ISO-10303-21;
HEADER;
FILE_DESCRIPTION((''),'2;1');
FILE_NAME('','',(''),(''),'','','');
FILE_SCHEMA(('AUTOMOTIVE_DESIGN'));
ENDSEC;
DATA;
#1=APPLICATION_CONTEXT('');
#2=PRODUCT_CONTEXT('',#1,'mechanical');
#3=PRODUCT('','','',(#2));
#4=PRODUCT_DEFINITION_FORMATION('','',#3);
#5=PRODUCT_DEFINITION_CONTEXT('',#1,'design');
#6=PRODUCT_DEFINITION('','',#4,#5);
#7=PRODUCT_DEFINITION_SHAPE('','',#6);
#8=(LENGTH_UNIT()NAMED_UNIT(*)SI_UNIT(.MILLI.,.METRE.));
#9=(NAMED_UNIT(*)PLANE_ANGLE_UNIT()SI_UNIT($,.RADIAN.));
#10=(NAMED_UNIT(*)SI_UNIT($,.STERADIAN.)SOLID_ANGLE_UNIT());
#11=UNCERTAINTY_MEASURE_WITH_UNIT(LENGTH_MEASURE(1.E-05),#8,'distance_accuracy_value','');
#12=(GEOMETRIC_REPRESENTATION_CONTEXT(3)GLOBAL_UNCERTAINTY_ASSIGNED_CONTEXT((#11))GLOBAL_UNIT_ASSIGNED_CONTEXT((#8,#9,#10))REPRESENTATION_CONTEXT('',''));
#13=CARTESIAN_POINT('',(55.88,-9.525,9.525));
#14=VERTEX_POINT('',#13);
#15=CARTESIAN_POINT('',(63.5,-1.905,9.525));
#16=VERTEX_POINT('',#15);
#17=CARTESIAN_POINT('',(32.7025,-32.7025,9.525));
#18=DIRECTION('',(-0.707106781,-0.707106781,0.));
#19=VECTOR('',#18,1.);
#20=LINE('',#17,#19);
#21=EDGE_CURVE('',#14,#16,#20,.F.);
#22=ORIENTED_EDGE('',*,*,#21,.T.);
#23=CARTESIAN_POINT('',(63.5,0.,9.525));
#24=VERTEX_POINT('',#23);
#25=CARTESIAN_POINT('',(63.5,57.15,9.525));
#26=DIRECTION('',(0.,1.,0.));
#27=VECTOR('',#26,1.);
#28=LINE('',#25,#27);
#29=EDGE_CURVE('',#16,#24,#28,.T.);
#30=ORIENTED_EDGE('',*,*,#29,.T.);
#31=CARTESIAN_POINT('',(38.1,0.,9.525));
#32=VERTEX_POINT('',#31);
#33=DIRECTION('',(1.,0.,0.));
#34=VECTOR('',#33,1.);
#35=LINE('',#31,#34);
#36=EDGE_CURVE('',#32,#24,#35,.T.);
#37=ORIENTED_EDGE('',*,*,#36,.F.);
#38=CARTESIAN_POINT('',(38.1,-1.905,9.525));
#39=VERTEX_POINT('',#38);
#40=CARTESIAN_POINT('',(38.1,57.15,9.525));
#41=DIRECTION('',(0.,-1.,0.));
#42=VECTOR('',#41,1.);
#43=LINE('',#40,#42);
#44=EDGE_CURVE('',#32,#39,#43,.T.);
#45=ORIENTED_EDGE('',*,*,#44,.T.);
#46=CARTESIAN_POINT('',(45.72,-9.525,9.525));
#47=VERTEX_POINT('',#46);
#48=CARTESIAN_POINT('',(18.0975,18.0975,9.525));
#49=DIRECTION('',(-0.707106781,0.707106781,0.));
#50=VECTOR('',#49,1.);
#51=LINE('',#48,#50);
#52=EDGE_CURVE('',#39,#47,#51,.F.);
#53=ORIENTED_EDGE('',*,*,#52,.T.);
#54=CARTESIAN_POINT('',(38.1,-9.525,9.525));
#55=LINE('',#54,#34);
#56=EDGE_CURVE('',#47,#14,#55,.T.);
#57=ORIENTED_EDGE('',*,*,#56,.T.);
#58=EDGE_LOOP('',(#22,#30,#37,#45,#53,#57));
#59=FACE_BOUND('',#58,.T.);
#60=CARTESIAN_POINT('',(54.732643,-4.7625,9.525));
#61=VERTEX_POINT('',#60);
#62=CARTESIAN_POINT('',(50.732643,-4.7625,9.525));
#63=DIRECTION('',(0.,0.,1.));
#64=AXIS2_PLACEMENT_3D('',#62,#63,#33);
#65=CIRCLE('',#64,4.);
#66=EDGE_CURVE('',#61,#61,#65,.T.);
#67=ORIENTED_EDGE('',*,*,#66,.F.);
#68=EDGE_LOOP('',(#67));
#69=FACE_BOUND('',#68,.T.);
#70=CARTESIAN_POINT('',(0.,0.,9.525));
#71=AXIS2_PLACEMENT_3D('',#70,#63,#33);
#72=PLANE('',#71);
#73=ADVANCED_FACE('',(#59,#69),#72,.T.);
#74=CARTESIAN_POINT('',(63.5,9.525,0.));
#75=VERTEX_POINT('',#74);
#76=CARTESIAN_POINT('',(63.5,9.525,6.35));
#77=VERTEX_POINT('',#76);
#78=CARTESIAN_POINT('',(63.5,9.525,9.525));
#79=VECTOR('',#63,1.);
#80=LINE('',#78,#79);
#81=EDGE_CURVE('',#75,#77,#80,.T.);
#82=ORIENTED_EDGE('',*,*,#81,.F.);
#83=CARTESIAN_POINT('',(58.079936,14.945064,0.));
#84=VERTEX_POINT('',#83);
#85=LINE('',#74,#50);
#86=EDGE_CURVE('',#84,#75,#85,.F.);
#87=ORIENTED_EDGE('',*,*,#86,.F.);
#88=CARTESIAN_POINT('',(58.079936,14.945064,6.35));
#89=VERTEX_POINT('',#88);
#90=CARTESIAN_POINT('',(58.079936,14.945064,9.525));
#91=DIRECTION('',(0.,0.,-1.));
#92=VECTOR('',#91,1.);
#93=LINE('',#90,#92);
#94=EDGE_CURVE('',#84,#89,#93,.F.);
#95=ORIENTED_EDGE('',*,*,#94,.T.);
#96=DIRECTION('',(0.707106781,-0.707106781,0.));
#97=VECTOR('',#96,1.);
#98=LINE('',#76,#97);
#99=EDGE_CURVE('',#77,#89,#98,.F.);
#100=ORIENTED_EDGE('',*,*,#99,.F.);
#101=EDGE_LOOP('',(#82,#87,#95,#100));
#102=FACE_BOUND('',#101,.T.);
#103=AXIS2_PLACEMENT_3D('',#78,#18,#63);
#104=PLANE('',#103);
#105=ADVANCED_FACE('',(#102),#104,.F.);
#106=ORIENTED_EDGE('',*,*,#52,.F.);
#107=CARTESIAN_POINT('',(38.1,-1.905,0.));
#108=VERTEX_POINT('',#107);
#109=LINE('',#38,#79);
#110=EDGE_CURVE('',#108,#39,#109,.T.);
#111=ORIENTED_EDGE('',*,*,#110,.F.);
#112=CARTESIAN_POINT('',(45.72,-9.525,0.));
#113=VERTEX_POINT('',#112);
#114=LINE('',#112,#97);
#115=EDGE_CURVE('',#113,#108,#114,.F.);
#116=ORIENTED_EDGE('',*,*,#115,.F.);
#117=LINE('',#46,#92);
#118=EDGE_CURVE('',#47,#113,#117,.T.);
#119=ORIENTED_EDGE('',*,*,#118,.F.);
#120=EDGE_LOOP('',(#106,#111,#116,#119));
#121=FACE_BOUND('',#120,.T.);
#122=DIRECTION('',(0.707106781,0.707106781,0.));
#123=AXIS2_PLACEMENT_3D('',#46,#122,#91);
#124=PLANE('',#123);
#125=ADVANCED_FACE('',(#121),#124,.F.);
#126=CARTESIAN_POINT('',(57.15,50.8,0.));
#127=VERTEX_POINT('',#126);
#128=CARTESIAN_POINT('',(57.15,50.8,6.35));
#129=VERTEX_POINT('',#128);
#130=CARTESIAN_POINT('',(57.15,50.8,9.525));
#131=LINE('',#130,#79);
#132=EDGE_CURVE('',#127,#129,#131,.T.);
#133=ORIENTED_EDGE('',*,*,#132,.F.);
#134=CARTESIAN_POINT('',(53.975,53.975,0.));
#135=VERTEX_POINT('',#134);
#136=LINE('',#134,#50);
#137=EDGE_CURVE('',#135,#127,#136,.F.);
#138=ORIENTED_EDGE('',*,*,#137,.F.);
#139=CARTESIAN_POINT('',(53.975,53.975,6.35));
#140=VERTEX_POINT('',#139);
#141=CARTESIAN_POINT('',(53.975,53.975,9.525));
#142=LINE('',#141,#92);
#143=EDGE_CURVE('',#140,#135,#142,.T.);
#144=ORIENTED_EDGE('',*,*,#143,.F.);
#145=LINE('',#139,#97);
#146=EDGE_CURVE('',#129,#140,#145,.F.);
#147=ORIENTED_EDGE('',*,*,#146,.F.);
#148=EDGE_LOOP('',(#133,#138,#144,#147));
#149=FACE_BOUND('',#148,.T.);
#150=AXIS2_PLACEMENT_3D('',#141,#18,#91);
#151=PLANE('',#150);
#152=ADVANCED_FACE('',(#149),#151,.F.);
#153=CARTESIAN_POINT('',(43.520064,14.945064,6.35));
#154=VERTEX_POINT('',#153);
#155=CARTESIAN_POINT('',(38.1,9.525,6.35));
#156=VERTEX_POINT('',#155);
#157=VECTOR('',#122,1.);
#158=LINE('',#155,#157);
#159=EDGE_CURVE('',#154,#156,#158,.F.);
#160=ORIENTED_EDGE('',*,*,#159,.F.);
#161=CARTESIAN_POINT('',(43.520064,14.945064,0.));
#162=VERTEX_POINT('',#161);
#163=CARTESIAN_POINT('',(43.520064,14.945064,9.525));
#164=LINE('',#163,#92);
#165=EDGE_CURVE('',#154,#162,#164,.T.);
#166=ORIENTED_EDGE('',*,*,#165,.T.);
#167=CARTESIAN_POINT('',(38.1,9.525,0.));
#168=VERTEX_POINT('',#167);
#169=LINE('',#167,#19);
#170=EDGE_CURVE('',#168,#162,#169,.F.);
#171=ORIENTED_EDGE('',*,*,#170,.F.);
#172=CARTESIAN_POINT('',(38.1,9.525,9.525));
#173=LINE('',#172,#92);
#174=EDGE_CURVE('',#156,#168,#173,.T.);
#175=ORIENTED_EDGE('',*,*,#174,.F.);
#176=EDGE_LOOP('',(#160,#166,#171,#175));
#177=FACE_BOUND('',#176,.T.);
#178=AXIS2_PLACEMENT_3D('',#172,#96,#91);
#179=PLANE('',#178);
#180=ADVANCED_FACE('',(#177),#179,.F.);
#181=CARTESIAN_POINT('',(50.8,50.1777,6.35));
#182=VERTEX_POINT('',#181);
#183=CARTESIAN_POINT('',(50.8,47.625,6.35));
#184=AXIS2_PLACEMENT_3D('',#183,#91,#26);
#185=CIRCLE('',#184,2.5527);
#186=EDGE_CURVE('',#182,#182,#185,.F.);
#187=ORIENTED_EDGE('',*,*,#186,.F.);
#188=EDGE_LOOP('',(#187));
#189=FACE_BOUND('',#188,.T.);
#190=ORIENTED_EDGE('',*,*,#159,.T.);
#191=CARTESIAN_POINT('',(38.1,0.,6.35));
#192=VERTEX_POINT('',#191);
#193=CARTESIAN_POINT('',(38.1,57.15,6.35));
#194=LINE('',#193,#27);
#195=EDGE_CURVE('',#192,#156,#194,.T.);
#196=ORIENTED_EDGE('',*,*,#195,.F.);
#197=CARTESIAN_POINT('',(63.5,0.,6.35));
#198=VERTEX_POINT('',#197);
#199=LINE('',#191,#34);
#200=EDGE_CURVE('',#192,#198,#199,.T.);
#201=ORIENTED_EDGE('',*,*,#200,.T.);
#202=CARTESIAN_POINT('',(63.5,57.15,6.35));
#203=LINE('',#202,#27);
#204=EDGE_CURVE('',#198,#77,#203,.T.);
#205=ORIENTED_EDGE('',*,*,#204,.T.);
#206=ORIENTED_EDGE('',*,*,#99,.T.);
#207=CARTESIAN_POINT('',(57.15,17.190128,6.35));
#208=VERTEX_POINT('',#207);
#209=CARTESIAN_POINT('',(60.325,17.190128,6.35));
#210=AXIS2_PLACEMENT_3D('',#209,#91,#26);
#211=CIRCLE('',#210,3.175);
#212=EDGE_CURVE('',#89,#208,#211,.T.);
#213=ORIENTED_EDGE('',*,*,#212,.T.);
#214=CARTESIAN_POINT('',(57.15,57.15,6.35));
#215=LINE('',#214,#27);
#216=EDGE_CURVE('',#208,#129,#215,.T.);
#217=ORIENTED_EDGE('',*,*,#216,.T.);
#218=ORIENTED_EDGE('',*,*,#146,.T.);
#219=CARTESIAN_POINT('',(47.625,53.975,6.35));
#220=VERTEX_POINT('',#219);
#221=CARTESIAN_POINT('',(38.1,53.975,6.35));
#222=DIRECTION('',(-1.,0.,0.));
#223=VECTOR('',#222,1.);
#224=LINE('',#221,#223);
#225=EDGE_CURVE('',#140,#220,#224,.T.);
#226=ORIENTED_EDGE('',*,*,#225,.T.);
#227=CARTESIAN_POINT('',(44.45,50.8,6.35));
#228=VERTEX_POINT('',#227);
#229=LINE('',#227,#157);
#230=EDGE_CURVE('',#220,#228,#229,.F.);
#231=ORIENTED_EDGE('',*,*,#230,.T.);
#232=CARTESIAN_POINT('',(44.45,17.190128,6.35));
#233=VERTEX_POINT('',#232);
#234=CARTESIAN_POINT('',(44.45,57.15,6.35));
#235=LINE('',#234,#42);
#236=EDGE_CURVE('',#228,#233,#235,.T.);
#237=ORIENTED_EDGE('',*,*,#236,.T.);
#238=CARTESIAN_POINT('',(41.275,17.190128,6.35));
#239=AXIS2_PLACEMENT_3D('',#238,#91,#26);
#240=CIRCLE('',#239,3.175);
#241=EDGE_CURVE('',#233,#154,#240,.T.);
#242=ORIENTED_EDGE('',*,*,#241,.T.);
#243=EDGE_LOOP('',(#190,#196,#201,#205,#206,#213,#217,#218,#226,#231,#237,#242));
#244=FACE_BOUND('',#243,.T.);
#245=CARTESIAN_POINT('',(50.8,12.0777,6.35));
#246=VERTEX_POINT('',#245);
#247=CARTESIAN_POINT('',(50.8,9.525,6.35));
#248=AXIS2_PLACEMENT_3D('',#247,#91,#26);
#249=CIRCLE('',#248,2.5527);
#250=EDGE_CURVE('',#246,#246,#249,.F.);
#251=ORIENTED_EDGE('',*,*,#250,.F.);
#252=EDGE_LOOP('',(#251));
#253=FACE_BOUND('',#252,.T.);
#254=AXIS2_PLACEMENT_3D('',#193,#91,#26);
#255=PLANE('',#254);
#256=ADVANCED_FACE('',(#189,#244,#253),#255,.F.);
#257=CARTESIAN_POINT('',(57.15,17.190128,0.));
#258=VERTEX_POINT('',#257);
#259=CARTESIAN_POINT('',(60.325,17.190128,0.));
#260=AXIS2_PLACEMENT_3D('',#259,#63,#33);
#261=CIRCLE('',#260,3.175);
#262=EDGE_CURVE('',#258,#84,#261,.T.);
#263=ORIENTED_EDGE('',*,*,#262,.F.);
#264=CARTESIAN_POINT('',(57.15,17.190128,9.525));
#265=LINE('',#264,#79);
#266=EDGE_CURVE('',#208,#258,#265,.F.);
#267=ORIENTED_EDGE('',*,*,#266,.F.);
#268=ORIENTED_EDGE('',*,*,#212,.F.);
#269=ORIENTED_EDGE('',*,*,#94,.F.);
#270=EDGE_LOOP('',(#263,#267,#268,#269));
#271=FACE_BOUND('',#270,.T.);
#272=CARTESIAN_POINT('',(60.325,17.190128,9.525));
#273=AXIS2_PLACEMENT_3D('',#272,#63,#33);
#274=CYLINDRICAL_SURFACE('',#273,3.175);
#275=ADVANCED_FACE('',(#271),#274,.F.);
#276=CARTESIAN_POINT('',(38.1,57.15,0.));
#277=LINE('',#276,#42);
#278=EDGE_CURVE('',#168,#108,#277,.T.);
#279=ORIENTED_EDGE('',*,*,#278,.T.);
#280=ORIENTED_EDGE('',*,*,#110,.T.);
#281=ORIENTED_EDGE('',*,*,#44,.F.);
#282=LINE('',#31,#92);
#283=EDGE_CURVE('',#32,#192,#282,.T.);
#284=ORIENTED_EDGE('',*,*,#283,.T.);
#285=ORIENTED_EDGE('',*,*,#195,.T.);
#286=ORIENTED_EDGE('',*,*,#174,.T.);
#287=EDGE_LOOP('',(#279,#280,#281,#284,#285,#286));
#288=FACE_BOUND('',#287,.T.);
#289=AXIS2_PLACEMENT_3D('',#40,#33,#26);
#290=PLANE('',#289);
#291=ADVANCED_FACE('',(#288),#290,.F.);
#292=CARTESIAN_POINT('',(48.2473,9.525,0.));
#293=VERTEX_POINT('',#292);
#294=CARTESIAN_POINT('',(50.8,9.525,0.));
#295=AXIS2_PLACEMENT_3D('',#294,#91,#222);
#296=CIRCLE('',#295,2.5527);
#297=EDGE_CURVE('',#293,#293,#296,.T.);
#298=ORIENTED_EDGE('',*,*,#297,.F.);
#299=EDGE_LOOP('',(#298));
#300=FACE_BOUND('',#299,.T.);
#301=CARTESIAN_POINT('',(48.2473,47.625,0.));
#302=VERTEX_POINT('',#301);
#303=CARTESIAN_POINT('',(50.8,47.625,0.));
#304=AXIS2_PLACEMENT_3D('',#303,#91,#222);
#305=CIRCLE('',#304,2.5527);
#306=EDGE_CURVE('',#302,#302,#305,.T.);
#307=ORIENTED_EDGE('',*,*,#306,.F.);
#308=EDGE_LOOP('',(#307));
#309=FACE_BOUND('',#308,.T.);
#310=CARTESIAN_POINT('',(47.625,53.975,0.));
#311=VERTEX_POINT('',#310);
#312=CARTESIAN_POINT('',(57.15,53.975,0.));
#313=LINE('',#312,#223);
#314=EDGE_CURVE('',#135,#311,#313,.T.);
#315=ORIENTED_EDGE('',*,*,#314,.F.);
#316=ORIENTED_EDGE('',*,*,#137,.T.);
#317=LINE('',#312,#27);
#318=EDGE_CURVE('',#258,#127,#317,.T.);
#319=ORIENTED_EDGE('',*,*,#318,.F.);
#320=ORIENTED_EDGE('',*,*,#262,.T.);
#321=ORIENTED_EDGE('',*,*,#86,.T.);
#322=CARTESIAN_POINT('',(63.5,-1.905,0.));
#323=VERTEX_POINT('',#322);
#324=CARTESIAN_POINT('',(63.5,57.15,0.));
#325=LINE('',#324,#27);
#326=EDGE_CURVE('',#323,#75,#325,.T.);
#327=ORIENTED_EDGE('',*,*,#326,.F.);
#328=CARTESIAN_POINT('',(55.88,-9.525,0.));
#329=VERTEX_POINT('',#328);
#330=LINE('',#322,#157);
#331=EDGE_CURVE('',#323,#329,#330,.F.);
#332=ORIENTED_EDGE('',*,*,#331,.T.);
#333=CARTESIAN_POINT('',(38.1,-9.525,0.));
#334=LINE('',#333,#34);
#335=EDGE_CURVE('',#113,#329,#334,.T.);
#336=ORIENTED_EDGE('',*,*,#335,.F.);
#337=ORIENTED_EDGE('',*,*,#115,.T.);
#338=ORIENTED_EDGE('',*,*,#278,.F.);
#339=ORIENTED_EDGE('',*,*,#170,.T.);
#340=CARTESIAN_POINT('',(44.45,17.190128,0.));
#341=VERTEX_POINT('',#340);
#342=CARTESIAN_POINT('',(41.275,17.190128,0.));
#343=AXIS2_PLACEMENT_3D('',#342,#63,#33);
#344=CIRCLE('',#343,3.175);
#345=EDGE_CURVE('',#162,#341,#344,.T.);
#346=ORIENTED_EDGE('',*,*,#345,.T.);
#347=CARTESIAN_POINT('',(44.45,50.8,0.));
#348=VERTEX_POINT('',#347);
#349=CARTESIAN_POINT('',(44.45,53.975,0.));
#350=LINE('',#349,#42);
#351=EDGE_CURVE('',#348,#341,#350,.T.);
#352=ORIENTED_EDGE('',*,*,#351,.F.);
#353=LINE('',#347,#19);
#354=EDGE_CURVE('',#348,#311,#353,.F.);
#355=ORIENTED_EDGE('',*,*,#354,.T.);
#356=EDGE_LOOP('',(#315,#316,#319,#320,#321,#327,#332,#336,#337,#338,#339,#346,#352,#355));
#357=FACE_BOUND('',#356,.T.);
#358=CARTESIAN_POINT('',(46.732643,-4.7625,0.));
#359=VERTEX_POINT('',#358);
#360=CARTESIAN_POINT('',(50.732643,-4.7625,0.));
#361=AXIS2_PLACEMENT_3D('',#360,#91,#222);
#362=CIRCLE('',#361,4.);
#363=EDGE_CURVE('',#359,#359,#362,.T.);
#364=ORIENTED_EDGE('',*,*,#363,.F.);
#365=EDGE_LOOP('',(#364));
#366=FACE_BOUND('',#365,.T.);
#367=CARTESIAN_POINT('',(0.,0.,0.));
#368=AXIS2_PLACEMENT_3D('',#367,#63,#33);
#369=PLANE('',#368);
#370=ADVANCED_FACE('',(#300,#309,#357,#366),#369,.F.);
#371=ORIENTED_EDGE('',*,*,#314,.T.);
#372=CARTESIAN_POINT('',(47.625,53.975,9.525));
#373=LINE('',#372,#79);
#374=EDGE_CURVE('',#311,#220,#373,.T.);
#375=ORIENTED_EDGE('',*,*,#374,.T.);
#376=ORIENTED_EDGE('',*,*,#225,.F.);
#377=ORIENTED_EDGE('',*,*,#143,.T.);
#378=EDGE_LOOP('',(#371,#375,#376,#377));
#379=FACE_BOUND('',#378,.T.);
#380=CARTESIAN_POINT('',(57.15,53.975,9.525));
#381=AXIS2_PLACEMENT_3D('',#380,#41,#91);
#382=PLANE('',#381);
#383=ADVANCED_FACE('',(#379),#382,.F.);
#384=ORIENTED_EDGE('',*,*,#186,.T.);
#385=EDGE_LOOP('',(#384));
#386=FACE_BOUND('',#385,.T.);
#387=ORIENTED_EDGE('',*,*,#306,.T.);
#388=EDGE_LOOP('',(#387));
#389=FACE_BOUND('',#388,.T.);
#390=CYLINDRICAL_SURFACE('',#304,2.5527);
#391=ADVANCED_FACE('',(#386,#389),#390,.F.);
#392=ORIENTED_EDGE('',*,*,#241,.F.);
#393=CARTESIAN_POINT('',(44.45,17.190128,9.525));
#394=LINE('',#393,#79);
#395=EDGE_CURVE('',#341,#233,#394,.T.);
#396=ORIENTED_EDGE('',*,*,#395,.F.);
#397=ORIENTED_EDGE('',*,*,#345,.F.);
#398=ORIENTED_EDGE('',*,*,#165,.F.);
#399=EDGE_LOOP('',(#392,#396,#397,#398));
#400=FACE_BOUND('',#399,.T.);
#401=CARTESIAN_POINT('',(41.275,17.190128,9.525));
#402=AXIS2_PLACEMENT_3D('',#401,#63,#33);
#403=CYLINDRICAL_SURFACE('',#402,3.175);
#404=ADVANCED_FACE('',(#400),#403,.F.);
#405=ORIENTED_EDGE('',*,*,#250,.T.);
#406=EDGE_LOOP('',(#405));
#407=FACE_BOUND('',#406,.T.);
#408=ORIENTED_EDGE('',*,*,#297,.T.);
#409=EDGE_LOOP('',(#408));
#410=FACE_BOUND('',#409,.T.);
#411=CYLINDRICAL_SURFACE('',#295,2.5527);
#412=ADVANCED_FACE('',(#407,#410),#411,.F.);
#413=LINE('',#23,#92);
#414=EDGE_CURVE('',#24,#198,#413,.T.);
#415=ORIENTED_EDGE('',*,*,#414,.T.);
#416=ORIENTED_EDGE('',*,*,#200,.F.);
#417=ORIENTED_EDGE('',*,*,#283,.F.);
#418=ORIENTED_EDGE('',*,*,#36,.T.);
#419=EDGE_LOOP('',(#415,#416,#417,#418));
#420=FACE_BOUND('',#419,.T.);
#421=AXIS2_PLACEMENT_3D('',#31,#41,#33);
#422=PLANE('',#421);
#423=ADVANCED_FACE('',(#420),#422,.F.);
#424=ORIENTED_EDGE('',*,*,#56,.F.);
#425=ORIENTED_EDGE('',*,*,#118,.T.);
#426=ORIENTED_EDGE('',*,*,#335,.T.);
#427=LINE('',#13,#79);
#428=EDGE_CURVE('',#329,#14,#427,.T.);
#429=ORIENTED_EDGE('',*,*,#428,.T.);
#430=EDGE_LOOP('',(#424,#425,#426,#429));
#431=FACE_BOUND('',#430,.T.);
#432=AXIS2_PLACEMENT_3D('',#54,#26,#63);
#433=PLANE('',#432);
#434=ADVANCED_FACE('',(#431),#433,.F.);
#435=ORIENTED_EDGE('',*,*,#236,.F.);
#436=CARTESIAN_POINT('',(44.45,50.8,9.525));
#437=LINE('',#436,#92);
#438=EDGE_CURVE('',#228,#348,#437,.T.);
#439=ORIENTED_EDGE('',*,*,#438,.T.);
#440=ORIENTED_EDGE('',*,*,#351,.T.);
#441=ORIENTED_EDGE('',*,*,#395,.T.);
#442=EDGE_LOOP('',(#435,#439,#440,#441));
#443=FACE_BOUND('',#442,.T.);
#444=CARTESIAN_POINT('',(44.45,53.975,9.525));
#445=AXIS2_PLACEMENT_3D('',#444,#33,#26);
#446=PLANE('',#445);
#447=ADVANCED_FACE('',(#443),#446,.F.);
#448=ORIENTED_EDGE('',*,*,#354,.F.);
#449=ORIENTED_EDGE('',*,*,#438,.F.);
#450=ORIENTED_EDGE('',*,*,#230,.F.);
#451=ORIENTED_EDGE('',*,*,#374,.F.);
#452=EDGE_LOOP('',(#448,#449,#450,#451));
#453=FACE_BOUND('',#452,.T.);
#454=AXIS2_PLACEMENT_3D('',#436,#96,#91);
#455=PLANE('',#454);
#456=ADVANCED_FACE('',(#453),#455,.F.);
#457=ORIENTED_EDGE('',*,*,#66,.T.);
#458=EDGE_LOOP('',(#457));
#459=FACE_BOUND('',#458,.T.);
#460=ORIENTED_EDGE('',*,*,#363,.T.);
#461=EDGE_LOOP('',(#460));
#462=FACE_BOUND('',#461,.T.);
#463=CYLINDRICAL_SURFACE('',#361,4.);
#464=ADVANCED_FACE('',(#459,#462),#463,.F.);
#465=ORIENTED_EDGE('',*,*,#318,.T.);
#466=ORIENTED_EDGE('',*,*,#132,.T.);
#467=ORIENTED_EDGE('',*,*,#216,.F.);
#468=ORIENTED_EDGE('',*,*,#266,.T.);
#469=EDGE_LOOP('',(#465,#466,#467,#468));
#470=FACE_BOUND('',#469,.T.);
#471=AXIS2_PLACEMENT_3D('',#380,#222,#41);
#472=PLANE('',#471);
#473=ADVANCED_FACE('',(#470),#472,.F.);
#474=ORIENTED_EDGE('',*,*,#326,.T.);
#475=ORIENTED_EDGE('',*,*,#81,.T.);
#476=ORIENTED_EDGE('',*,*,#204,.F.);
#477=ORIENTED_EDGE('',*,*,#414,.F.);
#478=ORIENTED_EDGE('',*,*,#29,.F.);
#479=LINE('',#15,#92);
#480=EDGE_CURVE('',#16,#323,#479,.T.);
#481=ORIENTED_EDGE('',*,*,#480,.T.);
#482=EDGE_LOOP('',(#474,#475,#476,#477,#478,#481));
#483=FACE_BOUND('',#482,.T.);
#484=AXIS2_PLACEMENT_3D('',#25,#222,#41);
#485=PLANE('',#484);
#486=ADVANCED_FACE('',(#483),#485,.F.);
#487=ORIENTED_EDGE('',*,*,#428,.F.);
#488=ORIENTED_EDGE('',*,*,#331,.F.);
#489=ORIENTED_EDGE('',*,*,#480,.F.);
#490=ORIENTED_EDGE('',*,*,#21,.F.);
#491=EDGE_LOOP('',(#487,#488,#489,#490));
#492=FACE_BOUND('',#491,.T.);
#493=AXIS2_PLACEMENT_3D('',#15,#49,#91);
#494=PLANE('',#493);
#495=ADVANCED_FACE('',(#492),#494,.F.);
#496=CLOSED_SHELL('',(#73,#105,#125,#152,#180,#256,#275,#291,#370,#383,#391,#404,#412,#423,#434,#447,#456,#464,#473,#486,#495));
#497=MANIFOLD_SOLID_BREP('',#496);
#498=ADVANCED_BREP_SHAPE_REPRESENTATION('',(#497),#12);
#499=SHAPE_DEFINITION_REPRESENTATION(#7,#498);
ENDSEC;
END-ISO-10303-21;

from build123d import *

# Parameters (mm, degrees)
SKETCH1_W                   = 25.4
SKETCH1_H                   = 66.675
BOSS_EXTRUDE1_DEPTH         = 9.525
TAP_DRILL_FOR_1_4_20_TAP1_D = 5.1054
SKETCH4_W                   = 3.175
SKETCH4_H                   = 57.15
CUT_EXTRUDE1_DEPTH          = 64.261426833
F_8_0_8_DIAMETER_HOLE1_D    = 8
CHAMFER1_SIZE               = 7.62
CUT_EXTRUDE2_DEPTH          = 86.959863454
CHAMFER2_SIZE               = 6.35
FILLET1_DEPTH               = 6.35
CHAMFER3_SIZE               = 3.175


with BuildPart() as part:
    # Sketch1 → Boss-Extrude1 (new body)
    with BuildSketch(Plane.XY):
        with Locations((50.8, 23.8125)):
            Rectangle(SKETCH1_W, SKETCH1_H)
    extrude(amount=BOSS_EXTRUDE1_DEPTH)

    # Tap Drill for 1/4-20 Tap1 (through all)
    with Locations(Plane(origin=(0, 0, 0), x_dir=(-1, 0, 0), z_dir=(0, 0, -1))):
        with Locations((-50.8, 47.625), (-50.8, 9.525)):
            Hole(TAP_DRILL_FOR_1_4_20_TAP1_D / 2)

    # Sketch4 → Cut-Extrude1 (cut, through all)
    with BuildSketch(Plane(origin=(63.5, 0, 0), x_dir=(0, 0, -1), z_dir=(1, 0, 0))):
        with Locations((-7.9375, 28.575)):
            Rectangle(SKETCH4_W, SKETCH4_H)
    extrude(amount=-CUT_EXTRUDE1_DEPTH, mode=Mode.SUBTRACT)

    # Ø8.0 (8) Diameter Hole1 (through all)
    with Locations(Plane(origin=(0, 0, 0), x_dir=(-1, 0, 0), z_dir=(0, 0, -1))):
        with Locations((-50.732643015, -4.7625)):
            Hole(F_8_0_8_DIAMETER_HOLE1_D / 2)

    # Chamfer1
    chamfer1_edges = [part.edges().sort_by_distance(p)[0] for p in [
        (63.5, -9.525, 4.7625),
        (38.1, -9.525, 4.7625),
    ]]
    chamfer(chamfer1_edges, length=CHAMFER1_SIZE)

    # Sketch7 → Cut-Extrude2 (cut, through all)
    with BuildSketch(Plane(origin=(0, 0, 0), x_dir=(-1, 0, 0), z_dir=(0, 0, -1))):
        Polygon((-44.45, 15.875), (-21.210032305, 15.875), (-21.210032305, 64.752426372), (-78.308679705, 64.752426372), (-78.308679705, 15.875), (-57.15, 15.875), (-57.15, 53.975), (-44.45, 53.975), align=None)
    extrude(amount=-CUT_EXTRUDE2_DEPTH, mode=Mode.SUBTRACT)

    # Chamfer2
    chamfer2_edges = [part.edges().sort_by_distance(p)[0] for p in [
        (38.1, 15.875, 3.175),
        (63.5, 15.875, 3.175),
    ]]
    chamfer(chamfer2_edges, length=CHAMFER2_SIZE - 0.0001)  # a hair under: the kernel refuses the full size

    # Fillet1: read off the stored shape, not the designer's step
    # Fillet1 outline → Fillet1 (add)
    with BuildSketch(Plane.XY):
        with BuildLine():
            ThreePointArc((44.45, 17.190128061), (44.208317516, 15.975108163), (43.52006403, 14.94506403))
            Line((43.52006403, 14.94506403), (44.45, 15.875))
            Line((44.45, 15.875), (44.45, 17.190128061))
        make_face()
        with BuildLine():
            ThreePointArc((58.07993597, 14.94506403), (57.391682484, 15.975108163), (57.15, 17.190128061))
            Line((57.15, 17.190128061), (57.15, 15.875))
            Line((57.15, 15.875), (58.07993597, 14.94506403))
        make_face()
    extrude(amount=FILLET1_DEPTH)

    # Chamfer3
    chamfer3_edges = [part.edges().sort_by_distance(p)[0] for p in [
        (57.15, 53.975, 3.175),
        (44.45, 53.975, 3.175),
    ]]
    chamfer(chamfer3_edges, length=CHAMFER3_SIZE)


solid = part.part
